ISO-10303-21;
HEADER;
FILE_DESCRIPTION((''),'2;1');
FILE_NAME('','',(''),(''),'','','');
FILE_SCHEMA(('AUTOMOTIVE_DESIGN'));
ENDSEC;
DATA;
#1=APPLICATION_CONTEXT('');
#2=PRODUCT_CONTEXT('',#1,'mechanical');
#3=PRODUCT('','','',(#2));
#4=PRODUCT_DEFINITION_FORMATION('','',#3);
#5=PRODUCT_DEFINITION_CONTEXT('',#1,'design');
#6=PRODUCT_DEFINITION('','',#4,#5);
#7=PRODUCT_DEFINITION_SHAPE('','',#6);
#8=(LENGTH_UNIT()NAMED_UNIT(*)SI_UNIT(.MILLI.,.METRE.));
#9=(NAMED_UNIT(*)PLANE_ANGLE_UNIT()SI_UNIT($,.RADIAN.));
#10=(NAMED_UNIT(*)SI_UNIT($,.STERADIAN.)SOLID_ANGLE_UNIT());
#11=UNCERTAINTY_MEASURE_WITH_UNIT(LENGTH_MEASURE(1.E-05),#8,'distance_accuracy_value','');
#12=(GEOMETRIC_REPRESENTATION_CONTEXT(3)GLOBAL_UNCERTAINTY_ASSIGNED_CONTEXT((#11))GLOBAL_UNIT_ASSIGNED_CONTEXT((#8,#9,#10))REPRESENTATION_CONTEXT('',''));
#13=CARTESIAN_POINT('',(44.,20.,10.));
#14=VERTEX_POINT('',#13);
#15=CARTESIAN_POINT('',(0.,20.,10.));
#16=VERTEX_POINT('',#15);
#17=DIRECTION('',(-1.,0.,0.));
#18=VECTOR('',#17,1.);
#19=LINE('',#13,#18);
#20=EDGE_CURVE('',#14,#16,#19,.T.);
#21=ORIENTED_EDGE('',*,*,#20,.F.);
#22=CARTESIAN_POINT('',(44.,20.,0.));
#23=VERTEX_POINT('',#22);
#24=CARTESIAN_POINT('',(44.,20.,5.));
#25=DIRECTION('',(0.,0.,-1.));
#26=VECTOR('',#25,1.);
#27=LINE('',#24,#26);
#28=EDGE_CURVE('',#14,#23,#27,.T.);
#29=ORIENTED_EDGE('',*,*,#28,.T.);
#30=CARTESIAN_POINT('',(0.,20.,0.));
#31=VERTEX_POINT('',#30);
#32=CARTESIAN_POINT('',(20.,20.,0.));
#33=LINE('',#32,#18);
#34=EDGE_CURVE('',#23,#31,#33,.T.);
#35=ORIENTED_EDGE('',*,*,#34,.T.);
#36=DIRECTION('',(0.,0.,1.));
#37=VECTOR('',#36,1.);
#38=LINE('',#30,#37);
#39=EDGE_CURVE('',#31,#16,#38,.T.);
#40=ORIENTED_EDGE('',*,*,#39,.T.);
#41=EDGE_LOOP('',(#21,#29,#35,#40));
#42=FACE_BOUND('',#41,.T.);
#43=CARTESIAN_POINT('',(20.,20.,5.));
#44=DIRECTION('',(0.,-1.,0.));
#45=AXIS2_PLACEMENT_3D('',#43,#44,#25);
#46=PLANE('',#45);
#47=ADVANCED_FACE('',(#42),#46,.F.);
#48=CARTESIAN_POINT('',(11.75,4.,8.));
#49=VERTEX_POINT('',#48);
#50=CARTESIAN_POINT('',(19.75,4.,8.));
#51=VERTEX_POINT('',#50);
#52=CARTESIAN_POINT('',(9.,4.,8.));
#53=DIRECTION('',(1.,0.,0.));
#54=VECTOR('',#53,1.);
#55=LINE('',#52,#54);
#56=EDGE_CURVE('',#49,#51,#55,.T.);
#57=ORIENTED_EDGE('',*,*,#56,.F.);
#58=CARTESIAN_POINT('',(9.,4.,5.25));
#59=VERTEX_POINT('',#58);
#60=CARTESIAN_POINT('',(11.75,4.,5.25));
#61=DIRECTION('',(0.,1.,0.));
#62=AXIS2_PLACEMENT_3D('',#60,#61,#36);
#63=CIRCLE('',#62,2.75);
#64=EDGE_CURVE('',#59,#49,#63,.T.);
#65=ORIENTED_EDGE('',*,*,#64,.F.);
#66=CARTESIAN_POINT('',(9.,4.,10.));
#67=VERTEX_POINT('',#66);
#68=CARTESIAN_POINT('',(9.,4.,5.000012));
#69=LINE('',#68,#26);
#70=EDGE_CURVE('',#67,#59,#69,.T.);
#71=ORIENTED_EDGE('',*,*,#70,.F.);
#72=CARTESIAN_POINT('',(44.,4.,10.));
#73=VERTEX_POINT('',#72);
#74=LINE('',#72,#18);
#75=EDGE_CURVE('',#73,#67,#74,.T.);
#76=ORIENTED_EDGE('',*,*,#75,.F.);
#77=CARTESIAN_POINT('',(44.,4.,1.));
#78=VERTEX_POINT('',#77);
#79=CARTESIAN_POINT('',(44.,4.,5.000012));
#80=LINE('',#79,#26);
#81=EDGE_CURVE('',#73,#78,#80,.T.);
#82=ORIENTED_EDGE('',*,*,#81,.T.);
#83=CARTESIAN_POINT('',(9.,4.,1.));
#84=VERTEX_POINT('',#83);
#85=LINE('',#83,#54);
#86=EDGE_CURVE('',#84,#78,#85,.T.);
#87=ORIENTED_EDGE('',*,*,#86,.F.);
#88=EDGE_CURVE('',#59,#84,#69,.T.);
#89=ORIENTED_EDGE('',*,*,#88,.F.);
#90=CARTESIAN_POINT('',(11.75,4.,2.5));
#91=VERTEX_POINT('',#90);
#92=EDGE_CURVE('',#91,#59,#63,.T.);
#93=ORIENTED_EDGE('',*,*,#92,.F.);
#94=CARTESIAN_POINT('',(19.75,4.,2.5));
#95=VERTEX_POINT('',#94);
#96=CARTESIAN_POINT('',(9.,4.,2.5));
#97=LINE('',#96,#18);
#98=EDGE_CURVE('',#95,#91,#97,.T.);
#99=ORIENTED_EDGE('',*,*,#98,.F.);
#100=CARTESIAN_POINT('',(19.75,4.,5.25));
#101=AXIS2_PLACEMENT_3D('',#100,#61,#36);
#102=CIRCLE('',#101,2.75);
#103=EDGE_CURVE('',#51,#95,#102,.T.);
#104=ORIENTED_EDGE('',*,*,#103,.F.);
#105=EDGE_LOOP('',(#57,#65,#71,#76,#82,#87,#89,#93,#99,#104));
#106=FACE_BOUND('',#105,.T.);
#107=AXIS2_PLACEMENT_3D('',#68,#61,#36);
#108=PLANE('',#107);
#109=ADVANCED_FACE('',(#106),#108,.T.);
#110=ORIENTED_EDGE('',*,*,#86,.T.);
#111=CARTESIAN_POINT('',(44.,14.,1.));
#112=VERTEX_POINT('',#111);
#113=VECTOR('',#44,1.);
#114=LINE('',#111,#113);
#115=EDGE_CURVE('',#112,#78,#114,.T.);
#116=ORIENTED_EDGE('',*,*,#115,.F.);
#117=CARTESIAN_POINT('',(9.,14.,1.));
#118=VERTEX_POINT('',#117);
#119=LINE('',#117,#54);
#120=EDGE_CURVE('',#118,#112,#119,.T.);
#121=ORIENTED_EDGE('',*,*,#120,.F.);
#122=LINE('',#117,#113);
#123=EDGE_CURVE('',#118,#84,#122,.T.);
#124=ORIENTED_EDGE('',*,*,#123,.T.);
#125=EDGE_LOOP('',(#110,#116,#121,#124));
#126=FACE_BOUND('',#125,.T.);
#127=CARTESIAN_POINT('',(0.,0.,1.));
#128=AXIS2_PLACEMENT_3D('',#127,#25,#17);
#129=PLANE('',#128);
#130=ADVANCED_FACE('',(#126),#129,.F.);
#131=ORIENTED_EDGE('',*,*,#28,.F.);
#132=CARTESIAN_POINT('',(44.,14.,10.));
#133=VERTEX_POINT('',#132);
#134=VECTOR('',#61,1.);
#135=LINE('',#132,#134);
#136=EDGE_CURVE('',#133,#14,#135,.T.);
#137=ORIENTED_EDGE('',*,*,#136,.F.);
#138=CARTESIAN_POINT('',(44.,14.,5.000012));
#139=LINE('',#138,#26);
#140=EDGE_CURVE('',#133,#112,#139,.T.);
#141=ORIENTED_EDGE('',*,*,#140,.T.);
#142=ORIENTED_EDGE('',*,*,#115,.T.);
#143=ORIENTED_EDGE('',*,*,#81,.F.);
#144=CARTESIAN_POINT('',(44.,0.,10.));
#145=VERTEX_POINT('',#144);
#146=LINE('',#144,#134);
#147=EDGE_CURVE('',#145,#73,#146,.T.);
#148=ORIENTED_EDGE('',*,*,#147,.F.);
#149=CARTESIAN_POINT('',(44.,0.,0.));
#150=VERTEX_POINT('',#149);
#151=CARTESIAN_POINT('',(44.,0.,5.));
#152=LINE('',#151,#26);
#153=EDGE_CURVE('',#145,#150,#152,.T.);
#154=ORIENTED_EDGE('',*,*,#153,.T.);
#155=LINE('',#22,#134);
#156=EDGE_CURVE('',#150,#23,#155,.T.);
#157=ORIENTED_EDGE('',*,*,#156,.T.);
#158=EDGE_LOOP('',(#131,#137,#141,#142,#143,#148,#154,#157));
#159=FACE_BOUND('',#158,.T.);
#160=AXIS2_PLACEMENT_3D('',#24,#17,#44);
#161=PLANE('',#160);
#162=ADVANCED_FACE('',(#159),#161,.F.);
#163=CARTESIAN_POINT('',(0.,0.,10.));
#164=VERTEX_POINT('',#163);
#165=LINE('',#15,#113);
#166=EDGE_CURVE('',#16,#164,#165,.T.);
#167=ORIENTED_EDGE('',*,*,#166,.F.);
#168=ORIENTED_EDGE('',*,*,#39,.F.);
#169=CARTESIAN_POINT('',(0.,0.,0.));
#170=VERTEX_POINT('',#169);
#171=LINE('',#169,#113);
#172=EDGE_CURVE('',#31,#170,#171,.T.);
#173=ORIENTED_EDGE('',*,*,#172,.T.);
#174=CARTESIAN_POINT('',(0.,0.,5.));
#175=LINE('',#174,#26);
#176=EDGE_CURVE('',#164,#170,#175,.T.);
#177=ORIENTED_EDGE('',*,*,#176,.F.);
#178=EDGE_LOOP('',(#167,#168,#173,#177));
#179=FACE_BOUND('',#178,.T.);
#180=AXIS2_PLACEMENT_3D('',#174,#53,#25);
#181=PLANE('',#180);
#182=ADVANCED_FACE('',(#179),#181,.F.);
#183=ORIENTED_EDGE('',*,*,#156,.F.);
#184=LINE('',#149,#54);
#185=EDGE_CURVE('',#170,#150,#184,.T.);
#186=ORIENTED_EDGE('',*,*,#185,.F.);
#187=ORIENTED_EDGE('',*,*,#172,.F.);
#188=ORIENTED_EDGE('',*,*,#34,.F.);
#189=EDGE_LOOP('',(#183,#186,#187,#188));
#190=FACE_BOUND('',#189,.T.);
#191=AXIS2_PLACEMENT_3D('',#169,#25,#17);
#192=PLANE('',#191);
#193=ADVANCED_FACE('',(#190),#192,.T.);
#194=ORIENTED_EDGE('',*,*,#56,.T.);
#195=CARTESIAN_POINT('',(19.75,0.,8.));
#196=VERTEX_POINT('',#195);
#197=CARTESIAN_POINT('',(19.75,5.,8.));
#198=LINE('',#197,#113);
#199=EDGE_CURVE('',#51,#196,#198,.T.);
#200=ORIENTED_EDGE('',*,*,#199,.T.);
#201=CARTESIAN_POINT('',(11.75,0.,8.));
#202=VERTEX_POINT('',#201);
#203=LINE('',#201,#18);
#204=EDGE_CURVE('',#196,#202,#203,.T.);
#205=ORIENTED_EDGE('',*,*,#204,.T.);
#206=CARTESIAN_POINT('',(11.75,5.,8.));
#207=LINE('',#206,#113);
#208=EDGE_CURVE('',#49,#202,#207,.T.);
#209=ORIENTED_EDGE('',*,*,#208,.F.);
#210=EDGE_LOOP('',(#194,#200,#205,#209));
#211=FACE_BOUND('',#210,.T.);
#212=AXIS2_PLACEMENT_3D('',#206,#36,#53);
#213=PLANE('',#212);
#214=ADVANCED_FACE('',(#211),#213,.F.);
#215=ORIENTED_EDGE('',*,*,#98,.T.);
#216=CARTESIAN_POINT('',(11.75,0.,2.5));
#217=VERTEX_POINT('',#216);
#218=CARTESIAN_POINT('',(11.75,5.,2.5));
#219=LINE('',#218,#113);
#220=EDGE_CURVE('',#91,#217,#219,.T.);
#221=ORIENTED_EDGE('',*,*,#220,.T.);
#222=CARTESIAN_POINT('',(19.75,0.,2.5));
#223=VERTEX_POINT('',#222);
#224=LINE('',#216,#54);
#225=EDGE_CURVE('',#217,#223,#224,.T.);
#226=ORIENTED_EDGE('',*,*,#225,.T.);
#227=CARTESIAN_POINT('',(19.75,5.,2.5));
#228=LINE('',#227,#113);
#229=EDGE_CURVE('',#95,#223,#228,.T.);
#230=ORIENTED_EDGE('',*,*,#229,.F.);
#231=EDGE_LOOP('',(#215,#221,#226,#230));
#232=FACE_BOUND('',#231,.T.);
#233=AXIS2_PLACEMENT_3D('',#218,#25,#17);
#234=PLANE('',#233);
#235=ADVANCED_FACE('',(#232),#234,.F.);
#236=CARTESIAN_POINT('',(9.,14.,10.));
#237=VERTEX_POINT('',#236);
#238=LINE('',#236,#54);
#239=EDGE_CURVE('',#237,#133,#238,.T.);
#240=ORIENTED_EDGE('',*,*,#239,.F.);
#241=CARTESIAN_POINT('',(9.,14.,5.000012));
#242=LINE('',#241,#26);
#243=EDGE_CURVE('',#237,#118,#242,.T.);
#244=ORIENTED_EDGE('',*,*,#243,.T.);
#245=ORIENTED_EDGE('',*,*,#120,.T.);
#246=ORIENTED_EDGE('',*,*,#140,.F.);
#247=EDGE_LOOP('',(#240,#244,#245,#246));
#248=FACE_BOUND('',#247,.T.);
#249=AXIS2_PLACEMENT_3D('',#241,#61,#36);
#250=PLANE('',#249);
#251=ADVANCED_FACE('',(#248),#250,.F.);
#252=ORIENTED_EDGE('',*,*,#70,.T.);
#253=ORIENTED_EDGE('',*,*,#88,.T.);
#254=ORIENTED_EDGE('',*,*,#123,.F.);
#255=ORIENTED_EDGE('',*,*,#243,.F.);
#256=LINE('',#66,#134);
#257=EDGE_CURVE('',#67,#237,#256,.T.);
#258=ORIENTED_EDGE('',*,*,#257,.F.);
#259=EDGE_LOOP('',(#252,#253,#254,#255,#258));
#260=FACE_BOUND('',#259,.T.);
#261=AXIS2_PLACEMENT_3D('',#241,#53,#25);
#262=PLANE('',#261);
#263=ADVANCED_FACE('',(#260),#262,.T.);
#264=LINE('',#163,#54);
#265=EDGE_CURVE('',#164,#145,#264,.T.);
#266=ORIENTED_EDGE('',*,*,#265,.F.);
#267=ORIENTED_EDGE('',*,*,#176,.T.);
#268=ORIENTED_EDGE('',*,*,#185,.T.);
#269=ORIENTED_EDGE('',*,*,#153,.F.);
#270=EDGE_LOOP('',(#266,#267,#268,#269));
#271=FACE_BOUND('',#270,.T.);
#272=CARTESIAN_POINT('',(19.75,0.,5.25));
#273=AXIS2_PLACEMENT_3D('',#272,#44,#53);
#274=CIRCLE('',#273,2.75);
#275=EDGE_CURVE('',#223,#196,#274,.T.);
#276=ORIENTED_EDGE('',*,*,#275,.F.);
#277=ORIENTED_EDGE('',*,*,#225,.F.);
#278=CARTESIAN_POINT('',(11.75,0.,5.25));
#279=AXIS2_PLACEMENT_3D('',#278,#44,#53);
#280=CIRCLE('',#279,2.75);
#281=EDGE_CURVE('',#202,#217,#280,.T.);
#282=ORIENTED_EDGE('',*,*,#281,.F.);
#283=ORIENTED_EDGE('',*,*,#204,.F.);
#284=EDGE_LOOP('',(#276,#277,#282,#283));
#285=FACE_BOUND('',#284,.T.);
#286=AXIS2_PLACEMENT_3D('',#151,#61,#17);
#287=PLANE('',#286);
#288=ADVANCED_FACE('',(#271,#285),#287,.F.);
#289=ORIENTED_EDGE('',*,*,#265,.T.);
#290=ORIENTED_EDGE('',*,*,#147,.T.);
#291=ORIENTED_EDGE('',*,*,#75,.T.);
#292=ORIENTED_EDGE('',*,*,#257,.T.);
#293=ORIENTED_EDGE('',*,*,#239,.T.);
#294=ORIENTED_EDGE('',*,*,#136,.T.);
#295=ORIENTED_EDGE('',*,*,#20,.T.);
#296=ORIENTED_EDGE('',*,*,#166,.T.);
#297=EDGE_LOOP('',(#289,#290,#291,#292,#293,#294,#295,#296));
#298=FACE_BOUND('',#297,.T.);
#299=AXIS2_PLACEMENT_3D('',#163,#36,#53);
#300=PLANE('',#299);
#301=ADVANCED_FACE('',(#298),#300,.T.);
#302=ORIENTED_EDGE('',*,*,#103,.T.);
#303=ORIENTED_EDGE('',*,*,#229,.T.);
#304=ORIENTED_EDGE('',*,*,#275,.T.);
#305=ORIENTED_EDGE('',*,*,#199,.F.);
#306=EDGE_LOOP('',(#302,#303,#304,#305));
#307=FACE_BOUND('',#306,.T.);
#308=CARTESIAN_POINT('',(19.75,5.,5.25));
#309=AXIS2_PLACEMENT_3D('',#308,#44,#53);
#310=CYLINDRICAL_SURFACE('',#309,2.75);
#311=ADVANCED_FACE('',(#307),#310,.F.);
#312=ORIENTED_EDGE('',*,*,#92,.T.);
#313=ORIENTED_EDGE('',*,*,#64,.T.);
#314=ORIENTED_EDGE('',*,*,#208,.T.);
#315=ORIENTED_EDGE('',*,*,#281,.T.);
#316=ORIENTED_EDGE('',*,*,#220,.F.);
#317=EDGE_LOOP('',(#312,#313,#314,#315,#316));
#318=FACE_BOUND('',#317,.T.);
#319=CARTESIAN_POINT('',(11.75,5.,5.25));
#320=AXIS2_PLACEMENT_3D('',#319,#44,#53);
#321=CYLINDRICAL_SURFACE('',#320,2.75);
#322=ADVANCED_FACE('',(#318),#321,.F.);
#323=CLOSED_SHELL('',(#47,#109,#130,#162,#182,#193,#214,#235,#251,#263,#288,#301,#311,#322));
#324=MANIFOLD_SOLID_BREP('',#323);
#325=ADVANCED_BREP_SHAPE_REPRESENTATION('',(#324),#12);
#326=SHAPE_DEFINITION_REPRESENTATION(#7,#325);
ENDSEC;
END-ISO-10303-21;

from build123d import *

# Parameters (mm, degrees)
RESSALTO_EXTRUS_O1_DEPTH   = 5
CORTE_EXTRUS_O1_DEPTH      = 83.83115356
CORTE_EXTRUS_O1_DEPTH_BACK = 4
ESBO_O5_W                  = 35
ESBO_O5_H                  = 10
RESSALTO_EXTRUS_O2_DEPTH   = 5
FILETE1_R                  = 5
CORTE_EXTRUS_O2_DEPTH      = 83.83115356
CORTE_EXTRUS_O3_DEPTH      = 5
FILETE2_R                  = 2
ESBO_O10_W                 = 20
ESBO_O10_H                 = 50
CORTE_EXTRUS_O4_DEPTH      = 84.282651255


with BuildPart() as part:
    # Esboço1 → Ressalto-extrusão1 (new body)
    with BuildSketch(Plane.XY):
        Polygon((0, 0), (0, 70), (20, 70), (20, 20), (44, 20), (44, 0), align=None)
    extrude(amount=RESSALTO_EXTRUS_O1_DEPTH)

    # Esboço5 → Corte-extrusão1 (cut, two sides: drawn at the far end of the back side and taken through both)
    with BuildSketch(Plane.XY.offset(5).offset(-CORTE_EXTRUS_O1_DEPTH_BACK)):
        with Locations((26.5, 9)):
            Rectangle(ESBO_O5_W, ESBO_O5_H)
    extrude(amount=CORTE_EXTRUS_O1_DEPTH + CORTE_EXTRUS_O1_DEPTH_BACK, mode=Mode.SUBTRACT)

    # Esboço6 → Ressalto-extrusão2 (add)
    with BuildSketch(Plane.XY.offset(5)):
        Polygon((44, 20), (0, 20), (0, 0), (44, 0), (44, 4), (9, 4), (9, 14), (44, 14), align=None)
    extrude(amount=RESSALTO_EXTRUS_O2_DEPTH)

    # Filete1
    filete1_edges = [part.edges().sort_by_distance(p)[0] for p in [
        (10, 20, 5),
    ]]
    fillet(filete1_edges, radius=FILETE1_R - 0.0001)  # a hair under: the kernel refuses the full size

    # Esboço7 → Corte-extrusão2 (cut, through all)
    with BuildSketch(Plane.XY.offset(5)):
        with BuildLine():
            Line((12.75, 65), (12.75, 55))
            ThreePointArc((12.75, 55), (10, 52.25), (7.25, 55))
            Line((7.25, 55), (7.25, 65))
            ThreePointArc((7.25, 65), (10, 67.75), (12.75, 65))
        make_face()
    extrude(amount=-CORTE_EXTRUS_O2_DEPTH, mode=Mode.SUBTRACT)

    # Esboço8 → Corte-extrusão3 (cut)
    with BuildSketch(Plane.XZ):
        with BuildLine():
            Line((11.75, 8), (19.75, 8))
            ThreePointArc((19.75, 8), (22.5, 5.25), (19.75, 2.5))
            Line((19.75, 2.5), (11.75, 2.5))
            ThreePointArc((11.75, 2.5), (9, 5.25), (11.75, 8))
        make_face()
    extrude(amount=-CORTE_EXTRUS_O3_DEPTH, mode=Mode.SUBTRACT)

    # Filete2
    filete2_edges = [part.edges().sort_by_distance(p)[0] for p in [
        (0, 70, 2.5),
        (20, 70, 2.5),
    ]]
    fillet(filete2_edges, radius=FILETE2_R)

    # Esboço10 → Corte-extrusão4 (cut, through all)
    with BuildSketch(Plane.XY.offset(10)):
        with Locations((10, 45)):
            Rectangle(ESBO_O10_W, ESBO_O10_H)
    extrude(amount=-CORTE_EXTRUS_O4_DEPTH, mode=Mode.SUBTRACT)


solid = part.part
